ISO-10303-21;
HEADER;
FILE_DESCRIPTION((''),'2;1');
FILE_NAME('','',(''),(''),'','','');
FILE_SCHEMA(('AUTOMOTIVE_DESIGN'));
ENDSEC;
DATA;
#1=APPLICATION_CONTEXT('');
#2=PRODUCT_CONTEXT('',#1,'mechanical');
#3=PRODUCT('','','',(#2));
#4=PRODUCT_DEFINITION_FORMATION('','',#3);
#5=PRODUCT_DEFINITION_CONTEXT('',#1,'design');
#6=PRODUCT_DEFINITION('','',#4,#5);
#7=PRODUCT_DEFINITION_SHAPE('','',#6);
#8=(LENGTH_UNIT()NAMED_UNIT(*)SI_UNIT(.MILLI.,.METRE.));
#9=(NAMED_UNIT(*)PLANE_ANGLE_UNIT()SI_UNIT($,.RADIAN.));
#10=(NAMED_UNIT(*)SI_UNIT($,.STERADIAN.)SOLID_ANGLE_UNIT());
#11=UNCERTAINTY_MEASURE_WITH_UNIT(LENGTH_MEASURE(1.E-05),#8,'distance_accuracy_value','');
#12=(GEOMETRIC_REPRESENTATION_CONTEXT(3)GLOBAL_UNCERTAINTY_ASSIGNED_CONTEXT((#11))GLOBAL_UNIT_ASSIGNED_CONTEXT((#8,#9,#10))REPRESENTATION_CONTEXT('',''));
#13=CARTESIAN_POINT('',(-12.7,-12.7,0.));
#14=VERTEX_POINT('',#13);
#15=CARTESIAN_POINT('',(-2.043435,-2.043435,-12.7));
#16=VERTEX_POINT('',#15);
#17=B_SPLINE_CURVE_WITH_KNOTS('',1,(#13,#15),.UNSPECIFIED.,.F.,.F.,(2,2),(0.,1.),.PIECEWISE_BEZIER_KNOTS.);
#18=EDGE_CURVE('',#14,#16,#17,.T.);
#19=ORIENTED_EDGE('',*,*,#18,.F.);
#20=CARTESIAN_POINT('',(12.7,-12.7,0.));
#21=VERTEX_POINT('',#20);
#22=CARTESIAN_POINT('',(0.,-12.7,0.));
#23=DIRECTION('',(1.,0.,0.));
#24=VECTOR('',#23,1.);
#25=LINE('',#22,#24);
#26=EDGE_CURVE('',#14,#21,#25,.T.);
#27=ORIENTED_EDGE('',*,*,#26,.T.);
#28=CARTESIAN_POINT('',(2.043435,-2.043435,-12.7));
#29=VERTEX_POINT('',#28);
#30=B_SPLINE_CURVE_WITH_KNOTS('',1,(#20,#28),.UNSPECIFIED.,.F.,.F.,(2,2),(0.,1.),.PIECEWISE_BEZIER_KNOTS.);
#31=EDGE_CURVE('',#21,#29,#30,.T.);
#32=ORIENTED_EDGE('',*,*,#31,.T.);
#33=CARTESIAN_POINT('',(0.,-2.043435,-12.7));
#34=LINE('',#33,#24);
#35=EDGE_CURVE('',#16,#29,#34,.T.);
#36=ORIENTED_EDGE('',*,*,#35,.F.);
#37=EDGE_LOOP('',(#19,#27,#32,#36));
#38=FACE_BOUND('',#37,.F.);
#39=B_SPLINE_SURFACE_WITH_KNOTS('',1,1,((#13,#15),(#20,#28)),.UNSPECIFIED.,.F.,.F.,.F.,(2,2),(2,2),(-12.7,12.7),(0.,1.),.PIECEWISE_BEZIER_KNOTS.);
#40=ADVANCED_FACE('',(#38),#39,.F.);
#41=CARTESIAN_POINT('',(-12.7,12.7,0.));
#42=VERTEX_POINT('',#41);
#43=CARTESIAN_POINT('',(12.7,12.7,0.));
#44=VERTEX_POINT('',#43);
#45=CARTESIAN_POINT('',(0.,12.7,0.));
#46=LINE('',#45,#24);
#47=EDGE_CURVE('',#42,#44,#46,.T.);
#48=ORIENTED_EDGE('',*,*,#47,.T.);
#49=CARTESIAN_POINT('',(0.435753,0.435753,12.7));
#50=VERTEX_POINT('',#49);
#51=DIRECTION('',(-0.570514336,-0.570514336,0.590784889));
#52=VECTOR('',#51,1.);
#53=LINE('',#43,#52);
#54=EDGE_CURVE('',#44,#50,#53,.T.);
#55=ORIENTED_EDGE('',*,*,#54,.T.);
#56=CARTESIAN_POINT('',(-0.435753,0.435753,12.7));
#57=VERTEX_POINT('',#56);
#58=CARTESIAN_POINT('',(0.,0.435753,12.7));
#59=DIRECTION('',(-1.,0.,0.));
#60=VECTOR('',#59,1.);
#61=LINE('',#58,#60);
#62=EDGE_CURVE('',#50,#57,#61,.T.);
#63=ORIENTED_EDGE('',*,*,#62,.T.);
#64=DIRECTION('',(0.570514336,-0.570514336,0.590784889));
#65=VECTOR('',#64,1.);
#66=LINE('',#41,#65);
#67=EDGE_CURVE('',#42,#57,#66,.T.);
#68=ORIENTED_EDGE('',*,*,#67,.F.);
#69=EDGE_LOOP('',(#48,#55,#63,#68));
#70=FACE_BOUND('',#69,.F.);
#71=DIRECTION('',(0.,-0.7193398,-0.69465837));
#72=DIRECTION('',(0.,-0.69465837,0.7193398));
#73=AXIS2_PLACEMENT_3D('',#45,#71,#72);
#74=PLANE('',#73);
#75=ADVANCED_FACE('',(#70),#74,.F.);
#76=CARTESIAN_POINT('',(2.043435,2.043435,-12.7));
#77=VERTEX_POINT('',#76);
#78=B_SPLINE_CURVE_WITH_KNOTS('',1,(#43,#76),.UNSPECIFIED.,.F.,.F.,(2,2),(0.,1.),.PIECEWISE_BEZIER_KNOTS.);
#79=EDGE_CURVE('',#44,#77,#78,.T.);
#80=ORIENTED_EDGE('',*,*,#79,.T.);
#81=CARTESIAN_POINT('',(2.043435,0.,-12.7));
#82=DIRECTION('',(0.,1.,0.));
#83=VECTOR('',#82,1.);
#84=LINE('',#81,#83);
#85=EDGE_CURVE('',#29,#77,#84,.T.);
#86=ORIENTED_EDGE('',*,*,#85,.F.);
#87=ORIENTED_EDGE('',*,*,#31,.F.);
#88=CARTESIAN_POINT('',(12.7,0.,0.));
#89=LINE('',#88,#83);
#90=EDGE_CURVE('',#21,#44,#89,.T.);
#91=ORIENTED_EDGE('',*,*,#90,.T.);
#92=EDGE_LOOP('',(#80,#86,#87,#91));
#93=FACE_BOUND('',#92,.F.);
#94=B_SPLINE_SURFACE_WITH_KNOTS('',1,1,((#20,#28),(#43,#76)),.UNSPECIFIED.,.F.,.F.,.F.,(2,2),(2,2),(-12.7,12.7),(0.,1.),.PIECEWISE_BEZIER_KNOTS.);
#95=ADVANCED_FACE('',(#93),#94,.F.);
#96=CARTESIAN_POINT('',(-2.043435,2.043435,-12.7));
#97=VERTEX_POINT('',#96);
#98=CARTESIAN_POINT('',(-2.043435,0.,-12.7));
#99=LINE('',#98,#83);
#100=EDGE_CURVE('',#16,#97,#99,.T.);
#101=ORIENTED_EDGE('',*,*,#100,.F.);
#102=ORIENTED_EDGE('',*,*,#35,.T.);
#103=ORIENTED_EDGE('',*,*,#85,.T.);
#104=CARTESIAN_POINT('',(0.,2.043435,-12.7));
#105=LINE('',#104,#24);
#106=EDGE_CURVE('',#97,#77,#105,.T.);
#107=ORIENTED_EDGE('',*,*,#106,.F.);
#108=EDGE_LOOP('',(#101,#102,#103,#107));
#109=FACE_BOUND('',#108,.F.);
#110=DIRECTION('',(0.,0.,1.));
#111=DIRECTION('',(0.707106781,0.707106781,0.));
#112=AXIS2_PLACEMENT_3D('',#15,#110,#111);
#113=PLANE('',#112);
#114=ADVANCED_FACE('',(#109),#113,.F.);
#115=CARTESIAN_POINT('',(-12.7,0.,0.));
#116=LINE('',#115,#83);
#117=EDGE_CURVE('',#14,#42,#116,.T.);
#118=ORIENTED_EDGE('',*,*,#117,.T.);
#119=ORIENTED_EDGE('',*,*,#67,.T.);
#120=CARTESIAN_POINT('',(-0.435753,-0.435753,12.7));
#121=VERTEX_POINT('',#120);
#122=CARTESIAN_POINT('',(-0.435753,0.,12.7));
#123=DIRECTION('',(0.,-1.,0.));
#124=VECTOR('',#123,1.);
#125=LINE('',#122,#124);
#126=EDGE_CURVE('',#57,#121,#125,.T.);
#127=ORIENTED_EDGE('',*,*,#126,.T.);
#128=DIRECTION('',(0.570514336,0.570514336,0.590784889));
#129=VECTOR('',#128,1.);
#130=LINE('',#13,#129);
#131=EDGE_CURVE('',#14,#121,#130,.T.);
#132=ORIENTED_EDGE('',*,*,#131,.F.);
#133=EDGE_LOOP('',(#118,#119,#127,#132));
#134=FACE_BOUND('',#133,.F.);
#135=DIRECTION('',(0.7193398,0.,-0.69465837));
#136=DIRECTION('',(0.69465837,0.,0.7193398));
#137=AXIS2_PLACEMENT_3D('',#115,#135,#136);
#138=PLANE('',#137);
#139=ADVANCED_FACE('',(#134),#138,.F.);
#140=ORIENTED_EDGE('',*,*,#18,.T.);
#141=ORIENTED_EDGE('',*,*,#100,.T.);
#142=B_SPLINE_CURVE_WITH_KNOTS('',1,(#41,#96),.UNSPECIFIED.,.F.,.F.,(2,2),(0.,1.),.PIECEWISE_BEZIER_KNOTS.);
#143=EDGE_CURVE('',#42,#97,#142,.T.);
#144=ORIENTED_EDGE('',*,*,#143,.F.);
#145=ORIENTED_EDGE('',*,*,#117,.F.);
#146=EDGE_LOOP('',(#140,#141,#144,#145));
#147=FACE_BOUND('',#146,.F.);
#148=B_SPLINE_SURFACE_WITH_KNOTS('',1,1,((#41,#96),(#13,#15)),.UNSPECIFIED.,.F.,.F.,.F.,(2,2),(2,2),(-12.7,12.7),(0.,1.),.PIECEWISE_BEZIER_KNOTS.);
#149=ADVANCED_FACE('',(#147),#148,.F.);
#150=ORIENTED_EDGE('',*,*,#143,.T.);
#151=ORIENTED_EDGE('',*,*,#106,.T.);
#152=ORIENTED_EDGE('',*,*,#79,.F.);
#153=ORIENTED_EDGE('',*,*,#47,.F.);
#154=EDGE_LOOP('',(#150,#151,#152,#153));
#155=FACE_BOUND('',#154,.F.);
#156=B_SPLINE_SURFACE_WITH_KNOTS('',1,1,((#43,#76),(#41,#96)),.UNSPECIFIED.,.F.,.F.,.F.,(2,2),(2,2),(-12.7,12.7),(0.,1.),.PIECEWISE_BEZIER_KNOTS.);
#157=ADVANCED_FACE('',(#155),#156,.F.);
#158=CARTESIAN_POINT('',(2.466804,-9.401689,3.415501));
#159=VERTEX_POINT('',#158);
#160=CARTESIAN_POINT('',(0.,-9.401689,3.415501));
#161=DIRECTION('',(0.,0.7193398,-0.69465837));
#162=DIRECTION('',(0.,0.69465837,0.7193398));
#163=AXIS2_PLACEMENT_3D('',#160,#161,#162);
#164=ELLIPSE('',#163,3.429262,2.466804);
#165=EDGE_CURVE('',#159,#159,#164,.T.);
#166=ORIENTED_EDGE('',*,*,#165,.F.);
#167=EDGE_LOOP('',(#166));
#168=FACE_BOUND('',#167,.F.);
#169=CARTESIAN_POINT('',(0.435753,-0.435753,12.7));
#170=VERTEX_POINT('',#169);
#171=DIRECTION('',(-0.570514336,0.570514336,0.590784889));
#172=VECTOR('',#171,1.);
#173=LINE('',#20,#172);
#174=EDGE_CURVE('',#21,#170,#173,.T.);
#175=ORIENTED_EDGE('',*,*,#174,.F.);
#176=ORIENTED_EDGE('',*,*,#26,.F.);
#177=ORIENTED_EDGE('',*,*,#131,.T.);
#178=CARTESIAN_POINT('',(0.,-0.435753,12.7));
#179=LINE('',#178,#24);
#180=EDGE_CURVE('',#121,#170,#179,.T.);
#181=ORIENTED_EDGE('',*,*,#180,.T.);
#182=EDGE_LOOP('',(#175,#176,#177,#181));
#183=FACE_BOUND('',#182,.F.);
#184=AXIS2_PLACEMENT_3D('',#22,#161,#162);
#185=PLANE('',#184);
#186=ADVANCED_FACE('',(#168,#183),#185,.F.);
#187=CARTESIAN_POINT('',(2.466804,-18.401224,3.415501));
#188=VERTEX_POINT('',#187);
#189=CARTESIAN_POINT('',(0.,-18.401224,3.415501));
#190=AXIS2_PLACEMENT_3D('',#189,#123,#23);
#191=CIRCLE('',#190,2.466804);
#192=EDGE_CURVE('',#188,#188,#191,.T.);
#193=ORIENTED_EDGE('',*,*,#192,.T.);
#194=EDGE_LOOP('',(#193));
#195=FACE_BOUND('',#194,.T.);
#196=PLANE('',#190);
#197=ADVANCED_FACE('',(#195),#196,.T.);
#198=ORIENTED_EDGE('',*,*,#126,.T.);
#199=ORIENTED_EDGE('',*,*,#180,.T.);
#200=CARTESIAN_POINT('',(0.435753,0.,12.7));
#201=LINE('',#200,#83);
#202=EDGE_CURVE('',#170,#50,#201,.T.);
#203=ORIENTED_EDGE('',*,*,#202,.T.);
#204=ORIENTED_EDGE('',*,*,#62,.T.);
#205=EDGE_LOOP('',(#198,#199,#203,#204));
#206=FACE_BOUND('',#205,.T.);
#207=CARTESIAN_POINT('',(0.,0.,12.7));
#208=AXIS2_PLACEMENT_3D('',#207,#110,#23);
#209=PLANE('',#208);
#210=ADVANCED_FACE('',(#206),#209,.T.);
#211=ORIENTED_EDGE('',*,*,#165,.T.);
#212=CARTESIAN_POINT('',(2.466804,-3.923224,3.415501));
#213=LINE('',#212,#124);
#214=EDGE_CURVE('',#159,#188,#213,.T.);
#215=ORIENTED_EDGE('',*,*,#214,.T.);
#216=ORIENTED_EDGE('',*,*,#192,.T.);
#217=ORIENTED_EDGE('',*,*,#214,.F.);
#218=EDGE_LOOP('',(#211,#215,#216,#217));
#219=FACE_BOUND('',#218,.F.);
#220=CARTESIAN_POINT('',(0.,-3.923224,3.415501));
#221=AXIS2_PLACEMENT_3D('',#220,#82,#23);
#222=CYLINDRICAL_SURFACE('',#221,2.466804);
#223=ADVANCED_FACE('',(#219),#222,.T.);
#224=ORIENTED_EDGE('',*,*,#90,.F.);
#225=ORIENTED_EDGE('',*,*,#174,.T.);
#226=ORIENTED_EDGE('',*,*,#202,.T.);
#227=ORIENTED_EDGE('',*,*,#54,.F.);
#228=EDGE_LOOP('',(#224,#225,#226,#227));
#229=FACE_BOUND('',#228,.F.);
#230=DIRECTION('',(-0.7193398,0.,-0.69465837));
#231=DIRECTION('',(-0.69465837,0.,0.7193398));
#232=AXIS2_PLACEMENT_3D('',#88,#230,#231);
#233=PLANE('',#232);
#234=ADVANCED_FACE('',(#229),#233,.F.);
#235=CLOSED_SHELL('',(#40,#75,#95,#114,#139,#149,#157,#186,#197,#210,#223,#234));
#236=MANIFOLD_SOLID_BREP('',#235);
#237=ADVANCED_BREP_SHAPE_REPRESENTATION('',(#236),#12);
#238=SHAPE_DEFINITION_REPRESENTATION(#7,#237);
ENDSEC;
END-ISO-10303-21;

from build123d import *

# Parameters (mm, degrees)
F0_W          = 25.4
F0_H          = 25.4
F1_DEPTH      = 12.7
F1_TAPER      = 44
F1_DEPTH_BACK = 12.7
F1_TAPER_BACK = 40
F4_R          = 2.4668043614
F5_DEPTH      = 14.478


with BuildPart() as f1:
    # F0 (on Top) → F1 (new body, two sides)
    with BuildSketch(Plane.XY) as f1_sk:
        Rectangle(F0_W, F0_H)
    extrude(amount=F1_DEPTH, taper=F1_TAPER)
    extrude(f1_sk.sketch, amount=-F1_DEPTH_BACK, taper=F1_TAPER_BACK)

    # F4 (on face) → F5 (join)
    with BuildSketch(Plane.XZ.offset(3.9232242852)):
        with Locations((0, 3.4155005123)):
            Circle(F4_R)
    extrude(amount=F5_DEPTH)


solid = f1.part
